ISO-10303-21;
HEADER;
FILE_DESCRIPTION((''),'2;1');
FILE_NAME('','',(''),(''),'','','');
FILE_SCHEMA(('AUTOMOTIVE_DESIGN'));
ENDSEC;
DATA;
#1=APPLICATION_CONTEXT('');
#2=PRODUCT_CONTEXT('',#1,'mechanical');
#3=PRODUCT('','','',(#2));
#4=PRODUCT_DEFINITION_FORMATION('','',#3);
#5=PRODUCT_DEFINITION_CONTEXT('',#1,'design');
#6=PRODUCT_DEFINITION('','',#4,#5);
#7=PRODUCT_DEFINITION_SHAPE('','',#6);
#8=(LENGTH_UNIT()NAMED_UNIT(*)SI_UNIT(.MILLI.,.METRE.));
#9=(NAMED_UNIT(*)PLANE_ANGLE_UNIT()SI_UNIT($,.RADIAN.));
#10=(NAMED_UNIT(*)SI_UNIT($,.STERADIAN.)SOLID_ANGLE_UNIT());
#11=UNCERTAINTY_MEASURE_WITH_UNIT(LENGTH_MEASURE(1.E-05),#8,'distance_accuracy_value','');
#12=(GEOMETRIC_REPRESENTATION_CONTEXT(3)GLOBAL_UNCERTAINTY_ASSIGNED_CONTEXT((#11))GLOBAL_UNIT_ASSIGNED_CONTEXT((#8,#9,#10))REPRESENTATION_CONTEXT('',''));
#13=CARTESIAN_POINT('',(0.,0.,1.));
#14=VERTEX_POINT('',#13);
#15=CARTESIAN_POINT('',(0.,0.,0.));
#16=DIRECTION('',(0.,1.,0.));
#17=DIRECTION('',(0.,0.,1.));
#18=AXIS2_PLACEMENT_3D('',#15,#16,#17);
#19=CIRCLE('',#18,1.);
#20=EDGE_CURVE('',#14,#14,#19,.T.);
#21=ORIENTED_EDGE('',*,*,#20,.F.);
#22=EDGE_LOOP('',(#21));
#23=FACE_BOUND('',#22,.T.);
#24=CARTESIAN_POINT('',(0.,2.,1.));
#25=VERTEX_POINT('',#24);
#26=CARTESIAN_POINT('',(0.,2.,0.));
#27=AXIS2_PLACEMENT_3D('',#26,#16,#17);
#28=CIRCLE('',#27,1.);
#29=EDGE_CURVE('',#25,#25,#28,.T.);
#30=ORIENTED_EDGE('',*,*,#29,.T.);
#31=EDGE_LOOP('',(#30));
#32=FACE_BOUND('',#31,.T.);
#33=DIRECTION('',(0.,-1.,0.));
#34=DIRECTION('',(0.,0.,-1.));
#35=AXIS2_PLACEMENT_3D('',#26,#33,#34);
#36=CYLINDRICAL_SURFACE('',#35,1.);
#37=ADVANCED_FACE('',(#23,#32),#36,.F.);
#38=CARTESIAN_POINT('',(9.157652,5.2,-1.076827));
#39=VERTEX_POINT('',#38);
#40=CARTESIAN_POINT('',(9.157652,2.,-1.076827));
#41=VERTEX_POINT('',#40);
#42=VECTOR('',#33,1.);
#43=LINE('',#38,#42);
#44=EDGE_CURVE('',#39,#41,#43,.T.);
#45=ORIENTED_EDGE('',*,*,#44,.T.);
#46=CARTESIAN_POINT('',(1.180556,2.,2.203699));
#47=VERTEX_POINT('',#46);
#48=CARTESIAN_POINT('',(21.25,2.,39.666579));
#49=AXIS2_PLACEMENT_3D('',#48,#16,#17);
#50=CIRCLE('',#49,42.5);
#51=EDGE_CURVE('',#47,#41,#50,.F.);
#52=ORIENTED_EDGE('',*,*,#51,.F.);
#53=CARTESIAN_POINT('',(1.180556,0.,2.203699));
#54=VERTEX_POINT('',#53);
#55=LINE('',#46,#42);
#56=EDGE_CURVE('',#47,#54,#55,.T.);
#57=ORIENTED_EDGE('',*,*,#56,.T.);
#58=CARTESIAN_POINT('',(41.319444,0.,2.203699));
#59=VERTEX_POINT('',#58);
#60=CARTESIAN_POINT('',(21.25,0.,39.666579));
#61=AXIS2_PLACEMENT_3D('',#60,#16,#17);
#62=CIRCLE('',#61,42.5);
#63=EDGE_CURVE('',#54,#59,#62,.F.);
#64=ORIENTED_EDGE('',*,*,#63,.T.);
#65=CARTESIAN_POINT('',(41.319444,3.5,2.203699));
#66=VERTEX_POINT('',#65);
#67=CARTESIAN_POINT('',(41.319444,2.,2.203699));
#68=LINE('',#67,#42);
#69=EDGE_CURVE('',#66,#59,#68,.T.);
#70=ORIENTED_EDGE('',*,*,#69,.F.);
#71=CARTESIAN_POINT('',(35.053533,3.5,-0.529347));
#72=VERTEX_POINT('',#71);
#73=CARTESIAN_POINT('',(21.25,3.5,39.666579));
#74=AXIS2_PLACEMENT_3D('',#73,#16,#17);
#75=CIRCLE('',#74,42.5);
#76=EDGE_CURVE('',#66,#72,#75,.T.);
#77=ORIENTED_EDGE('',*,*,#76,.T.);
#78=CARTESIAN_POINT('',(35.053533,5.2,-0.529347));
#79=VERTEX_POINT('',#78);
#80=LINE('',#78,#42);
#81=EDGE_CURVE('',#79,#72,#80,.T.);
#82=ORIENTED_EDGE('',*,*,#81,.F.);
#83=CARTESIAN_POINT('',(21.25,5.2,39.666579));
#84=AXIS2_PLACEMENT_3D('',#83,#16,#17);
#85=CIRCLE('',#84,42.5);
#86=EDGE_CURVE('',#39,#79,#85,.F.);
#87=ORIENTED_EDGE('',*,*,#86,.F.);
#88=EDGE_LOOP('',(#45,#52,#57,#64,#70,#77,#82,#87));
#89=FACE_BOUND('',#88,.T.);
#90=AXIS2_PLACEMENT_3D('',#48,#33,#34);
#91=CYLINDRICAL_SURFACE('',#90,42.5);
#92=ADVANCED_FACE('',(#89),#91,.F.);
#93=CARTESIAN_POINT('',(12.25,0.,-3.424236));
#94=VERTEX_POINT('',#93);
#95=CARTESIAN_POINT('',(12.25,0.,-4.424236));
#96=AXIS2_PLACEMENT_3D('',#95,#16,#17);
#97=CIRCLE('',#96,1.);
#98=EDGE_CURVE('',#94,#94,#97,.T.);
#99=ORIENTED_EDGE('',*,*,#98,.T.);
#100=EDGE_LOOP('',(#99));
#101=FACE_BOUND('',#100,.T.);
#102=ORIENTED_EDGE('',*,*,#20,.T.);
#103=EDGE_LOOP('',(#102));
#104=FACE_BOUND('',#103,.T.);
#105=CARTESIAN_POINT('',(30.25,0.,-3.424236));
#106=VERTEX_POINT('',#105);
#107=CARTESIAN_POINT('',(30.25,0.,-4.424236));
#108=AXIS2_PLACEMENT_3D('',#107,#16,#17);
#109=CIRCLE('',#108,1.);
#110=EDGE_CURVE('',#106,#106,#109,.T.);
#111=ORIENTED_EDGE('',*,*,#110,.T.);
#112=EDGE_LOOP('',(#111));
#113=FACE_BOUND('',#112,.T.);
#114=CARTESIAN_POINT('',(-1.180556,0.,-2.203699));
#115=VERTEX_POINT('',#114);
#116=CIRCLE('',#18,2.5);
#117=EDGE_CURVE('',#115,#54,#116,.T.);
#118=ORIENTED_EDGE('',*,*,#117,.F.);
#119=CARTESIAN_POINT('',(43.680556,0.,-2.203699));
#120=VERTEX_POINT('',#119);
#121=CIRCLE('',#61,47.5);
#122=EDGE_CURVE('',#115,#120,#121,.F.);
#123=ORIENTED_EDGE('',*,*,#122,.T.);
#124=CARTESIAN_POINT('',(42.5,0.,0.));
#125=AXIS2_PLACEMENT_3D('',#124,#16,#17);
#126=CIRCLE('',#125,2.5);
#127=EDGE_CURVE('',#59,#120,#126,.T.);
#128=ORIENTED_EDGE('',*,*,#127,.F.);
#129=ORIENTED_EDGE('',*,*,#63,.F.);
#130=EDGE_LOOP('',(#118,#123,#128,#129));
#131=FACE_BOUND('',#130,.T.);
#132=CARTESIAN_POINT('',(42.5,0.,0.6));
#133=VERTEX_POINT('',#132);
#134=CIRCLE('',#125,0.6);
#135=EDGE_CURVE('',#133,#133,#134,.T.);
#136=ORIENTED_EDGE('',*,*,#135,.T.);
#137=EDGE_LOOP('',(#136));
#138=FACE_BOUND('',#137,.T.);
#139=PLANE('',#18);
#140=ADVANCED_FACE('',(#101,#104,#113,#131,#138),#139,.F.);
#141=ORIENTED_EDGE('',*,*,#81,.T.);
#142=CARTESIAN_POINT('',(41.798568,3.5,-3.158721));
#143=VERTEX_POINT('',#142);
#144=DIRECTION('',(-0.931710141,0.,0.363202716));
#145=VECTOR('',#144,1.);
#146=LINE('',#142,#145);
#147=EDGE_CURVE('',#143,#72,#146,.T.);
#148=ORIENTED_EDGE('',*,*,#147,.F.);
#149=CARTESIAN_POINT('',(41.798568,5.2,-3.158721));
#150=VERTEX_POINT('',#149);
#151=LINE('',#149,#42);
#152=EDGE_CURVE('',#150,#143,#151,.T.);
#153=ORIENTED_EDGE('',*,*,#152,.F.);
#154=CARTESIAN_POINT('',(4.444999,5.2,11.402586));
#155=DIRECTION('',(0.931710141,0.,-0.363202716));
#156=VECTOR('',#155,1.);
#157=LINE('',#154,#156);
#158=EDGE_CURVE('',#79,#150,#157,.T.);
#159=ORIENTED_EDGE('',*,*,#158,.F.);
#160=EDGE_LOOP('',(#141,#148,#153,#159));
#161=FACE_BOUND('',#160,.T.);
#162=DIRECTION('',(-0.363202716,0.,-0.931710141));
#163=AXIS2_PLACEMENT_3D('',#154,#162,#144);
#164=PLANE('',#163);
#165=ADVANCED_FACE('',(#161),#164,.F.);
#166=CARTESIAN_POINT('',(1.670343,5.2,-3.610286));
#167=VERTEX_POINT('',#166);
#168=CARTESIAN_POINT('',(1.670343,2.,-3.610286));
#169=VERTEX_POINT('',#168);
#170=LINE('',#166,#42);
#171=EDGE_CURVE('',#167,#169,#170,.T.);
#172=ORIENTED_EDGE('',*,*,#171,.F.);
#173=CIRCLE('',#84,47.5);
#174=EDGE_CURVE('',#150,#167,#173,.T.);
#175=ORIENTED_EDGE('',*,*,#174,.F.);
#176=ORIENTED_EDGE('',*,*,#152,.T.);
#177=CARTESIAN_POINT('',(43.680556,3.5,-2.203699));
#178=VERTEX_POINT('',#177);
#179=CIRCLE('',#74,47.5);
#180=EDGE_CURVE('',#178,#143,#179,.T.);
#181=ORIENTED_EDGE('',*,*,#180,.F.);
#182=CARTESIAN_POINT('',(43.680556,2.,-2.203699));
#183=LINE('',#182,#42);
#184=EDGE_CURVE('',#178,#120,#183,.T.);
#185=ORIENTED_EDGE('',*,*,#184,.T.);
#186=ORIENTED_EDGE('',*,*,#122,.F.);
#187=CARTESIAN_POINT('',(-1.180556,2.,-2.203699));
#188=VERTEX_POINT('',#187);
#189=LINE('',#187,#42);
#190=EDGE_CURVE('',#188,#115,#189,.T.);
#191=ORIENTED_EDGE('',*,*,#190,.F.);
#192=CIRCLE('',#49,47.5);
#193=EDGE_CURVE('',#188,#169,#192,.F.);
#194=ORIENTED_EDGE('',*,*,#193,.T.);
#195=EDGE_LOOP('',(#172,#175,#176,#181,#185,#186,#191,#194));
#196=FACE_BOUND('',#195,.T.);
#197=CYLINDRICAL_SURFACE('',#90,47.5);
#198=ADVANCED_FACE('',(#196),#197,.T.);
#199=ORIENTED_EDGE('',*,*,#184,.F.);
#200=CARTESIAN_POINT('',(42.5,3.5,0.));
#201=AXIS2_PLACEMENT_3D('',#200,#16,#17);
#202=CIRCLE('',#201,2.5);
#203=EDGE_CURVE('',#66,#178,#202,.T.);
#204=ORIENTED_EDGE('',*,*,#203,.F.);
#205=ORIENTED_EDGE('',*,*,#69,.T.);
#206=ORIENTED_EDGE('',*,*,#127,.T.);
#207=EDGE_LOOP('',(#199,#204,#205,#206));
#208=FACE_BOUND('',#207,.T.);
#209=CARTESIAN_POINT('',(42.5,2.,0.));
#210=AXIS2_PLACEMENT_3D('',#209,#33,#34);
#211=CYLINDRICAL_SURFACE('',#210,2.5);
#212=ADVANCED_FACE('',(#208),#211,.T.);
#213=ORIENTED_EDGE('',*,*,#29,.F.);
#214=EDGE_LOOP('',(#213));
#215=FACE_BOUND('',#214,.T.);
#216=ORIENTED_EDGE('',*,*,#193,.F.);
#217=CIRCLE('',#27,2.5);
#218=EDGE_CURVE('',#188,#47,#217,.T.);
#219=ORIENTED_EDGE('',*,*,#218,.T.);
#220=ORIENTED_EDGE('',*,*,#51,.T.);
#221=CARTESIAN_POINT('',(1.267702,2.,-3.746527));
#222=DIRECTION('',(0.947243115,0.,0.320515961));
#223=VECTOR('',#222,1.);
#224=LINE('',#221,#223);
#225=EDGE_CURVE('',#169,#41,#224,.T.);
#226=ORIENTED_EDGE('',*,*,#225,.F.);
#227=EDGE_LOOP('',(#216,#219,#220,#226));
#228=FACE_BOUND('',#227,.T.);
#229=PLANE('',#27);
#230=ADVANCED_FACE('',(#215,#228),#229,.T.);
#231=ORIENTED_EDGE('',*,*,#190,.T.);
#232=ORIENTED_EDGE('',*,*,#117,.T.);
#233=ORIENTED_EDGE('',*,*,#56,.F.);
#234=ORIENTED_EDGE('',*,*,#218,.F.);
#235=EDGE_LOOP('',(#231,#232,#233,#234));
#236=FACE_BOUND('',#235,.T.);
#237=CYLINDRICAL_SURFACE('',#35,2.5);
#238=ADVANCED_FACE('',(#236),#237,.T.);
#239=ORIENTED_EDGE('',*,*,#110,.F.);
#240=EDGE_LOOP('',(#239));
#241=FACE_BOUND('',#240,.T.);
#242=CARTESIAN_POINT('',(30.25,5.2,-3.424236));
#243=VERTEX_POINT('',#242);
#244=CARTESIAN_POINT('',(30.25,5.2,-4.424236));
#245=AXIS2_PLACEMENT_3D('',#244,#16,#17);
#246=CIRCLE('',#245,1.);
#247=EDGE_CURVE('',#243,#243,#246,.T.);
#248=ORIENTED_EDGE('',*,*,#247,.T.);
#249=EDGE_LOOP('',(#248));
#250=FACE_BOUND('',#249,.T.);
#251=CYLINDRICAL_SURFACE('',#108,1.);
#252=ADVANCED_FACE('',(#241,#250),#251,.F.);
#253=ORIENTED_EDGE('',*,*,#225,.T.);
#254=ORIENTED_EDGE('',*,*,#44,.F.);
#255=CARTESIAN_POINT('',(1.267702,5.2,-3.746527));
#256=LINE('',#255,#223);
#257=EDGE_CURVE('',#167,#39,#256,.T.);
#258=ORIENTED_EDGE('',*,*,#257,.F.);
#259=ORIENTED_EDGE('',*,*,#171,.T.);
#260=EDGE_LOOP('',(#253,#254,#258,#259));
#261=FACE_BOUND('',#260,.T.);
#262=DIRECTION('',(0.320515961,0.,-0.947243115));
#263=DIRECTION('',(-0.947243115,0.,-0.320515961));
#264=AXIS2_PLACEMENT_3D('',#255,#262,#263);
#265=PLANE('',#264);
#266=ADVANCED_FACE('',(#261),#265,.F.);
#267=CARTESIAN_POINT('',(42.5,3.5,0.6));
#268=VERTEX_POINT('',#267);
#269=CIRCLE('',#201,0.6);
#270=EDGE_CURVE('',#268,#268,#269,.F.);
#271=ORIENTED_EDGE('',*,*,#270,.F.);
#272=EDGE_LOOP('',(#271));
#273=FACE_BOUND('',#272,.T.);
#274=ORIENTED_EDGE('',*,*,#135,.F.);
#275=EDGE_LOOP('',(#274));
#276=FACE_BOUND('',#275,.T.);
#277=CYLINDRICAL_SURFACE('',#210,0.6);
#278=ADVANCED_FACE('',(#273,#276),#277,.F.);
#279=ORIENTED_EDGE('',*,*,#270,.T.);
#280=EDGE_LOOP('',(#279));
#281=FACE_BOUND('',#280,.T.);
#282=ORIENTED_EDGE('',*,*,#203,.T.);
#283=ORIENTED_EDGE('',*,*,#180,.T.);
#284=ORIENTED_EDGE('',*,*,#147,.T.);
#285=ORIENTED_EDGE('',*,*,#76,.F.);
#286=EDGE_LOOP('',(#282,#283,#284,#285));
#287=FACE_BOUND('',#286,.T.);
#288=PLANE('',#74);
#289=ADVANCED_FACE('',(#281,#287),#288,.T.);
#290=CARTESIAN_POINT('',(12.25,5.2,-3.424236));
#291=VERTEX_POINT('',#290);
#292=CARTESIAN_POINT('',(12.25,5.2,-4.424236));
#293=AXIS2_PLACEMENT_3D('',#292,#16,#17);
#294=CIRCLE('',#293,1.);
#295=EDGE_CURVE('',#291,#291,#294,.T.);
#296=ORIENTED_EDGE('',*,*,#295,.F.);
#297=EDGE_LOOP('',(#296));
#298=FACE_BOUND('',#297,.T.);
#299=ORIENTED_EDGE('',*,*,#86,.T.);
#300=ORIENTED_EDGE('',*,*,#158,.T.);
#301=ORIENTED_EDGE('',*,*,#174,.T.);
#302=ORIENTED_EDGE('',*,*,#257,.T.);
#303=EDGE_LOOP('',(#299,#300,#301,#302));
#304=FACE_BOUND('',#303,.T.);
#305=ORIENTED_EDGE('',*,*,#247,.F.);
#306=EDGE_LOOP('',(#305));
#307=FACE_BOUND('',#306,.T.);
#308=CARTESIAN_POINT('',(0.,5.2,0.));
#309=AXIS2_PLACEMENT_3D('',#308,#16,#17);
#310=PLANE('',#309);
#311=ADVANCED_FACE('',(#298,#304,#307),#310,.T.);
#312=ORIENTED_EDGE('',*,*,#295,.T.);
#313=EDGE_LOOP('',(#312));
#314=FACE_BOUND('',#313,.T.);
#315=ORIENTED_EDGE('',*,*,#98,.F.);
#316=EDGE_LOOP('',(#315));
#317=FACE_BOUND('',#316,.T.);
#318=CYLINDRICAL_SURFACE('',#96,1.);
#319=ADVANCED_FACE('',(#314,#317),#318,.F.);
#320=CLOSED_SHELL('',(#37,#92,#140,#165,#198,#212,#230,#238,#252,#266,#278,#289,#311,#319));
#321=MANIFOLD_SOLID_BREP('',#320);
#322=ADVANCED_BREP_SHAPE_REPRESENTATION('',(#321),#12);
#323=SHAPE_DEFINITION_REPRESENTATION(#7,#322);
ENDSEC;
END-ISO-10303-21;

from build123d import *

# Parameters (mm, degrees)
SKETCH2_R           = 1
SKETCH2_R_2         = 0.6
BOSS_EXTRUDE2_DEPTH = 2
BOSS_EXTRUDE3_DEPTH = 3.2
SKETCH4_R           = 0.6
BOSS_EXTRUDE4_DEPTH = 1.5
SKETCH5_R           = 1
CUT_EXTRUDE1_DEPTH  = 46.971757444


with BuildPart() as part:
    # Sketch2 → Boss-Extrude2 (new body)
    with BuildSketch(Plane(origin=(0, 0, 0), x_dir=(1, 0, 0), z_dir=(0, 1, 0))):
        with BuildLine():
            ThreePointArc((43.680555556, 2.203698841), (21.25, 7.833420868), (-1.180555556, 2.203698841))
            ThreePointArc((-1.180555556, 2.203698841), (-2.203698841, -1.180555556), (1.180555556, -2.203698841))
            ThreePointArc((1.180555556, -2.203698841), (21.25, 2.833420868), (41.319444444, -2.203698841))
            ThreePointArc((41.319444444, -2.203698841), (44.703698841, -1.180555556), (43.680555556, 2.203698841))
        make_face()
        Circle(SKETCH2_R, mode=Mode.SUBTRACT)
        with Locations((42.5, 0)):
            Circle(SKETCH2_R_2, mode=Mode.SUBTRACT)
    extrude(amount=BOSS_EXTRUDE2_DEPTH)

    # Sketch3 → Boss-Extrude3 (add)
    with BuildSketch(Plane(origin=(0, 2, 0), x_dir=(1, 0, 0), z_dir=(0, 1, 0))):
        with BuildLine():
            ThreePointArc((41.798567685, 3.158721406), (21.784485497, 7.830413671), (1.670343314, 3.610285866))
            Line((1.670343314, 3.610285866), (9.157651663, 1.076826613))
            ThreePointArc((9.157651663, 1.076826613), (22.148316133, 2.823926021), (35.053533161, 0.529346934))
            Line((35.053533161, 0.529346934), (41.798567685, 3.158721406))
        make_face()
    extrude(amount=BOSS_EXTRUDE3_DEPTH)

    # Sketch4 → Boss-Extrude4 (add)
    with BuildSketch(Plane(origin=(0, 2, 0), x_dir=(1, 0, 0), z_dir=(0, 1, 0))):
        with BuildLine():
            ThreePointArc((43.680555556, 2.203698841), (42.744866263, 2.691663565), (41.798567685, 3.158721406))
            Line((41.798567685, 3.158721406), (35.053533161, 0.529346934))
            ThreePointArc((35.053533161, 0.529346934), (38.241528412, -0.710989517), (41.319444444, -2.203698841))
            ThreePointArc((41.319444444, -2.203698841), (44.703698841, -1.180555556), (43.680555556, 2.203698841))
        make_face()
        with Locations((42.5, 0)):
            Circle(SKETCH4_R, mode=Mode.SUBTRACT)
    extrude(amount=BOSS_EXTRUDE4_DEPTH)

    # Sketch5 → Cut-Extrude1 (cut, through all)
    with BuildSketch(Plane(origin=(0, 5.2, 0), x_dir=(1, 0, 0), z_dir=(0, 1, 0))):
        with Locations((12.25, 4.424236239)):
            Circle(SKETCH5_R)
        with Locations((30.25, 4.424236239)):
            Circle(SKETCH5_R)
    extrude(amount=-CUT_EXTRUDE1_DEPTH, mode=Mode.SUBTRACT)


solid = part.part
